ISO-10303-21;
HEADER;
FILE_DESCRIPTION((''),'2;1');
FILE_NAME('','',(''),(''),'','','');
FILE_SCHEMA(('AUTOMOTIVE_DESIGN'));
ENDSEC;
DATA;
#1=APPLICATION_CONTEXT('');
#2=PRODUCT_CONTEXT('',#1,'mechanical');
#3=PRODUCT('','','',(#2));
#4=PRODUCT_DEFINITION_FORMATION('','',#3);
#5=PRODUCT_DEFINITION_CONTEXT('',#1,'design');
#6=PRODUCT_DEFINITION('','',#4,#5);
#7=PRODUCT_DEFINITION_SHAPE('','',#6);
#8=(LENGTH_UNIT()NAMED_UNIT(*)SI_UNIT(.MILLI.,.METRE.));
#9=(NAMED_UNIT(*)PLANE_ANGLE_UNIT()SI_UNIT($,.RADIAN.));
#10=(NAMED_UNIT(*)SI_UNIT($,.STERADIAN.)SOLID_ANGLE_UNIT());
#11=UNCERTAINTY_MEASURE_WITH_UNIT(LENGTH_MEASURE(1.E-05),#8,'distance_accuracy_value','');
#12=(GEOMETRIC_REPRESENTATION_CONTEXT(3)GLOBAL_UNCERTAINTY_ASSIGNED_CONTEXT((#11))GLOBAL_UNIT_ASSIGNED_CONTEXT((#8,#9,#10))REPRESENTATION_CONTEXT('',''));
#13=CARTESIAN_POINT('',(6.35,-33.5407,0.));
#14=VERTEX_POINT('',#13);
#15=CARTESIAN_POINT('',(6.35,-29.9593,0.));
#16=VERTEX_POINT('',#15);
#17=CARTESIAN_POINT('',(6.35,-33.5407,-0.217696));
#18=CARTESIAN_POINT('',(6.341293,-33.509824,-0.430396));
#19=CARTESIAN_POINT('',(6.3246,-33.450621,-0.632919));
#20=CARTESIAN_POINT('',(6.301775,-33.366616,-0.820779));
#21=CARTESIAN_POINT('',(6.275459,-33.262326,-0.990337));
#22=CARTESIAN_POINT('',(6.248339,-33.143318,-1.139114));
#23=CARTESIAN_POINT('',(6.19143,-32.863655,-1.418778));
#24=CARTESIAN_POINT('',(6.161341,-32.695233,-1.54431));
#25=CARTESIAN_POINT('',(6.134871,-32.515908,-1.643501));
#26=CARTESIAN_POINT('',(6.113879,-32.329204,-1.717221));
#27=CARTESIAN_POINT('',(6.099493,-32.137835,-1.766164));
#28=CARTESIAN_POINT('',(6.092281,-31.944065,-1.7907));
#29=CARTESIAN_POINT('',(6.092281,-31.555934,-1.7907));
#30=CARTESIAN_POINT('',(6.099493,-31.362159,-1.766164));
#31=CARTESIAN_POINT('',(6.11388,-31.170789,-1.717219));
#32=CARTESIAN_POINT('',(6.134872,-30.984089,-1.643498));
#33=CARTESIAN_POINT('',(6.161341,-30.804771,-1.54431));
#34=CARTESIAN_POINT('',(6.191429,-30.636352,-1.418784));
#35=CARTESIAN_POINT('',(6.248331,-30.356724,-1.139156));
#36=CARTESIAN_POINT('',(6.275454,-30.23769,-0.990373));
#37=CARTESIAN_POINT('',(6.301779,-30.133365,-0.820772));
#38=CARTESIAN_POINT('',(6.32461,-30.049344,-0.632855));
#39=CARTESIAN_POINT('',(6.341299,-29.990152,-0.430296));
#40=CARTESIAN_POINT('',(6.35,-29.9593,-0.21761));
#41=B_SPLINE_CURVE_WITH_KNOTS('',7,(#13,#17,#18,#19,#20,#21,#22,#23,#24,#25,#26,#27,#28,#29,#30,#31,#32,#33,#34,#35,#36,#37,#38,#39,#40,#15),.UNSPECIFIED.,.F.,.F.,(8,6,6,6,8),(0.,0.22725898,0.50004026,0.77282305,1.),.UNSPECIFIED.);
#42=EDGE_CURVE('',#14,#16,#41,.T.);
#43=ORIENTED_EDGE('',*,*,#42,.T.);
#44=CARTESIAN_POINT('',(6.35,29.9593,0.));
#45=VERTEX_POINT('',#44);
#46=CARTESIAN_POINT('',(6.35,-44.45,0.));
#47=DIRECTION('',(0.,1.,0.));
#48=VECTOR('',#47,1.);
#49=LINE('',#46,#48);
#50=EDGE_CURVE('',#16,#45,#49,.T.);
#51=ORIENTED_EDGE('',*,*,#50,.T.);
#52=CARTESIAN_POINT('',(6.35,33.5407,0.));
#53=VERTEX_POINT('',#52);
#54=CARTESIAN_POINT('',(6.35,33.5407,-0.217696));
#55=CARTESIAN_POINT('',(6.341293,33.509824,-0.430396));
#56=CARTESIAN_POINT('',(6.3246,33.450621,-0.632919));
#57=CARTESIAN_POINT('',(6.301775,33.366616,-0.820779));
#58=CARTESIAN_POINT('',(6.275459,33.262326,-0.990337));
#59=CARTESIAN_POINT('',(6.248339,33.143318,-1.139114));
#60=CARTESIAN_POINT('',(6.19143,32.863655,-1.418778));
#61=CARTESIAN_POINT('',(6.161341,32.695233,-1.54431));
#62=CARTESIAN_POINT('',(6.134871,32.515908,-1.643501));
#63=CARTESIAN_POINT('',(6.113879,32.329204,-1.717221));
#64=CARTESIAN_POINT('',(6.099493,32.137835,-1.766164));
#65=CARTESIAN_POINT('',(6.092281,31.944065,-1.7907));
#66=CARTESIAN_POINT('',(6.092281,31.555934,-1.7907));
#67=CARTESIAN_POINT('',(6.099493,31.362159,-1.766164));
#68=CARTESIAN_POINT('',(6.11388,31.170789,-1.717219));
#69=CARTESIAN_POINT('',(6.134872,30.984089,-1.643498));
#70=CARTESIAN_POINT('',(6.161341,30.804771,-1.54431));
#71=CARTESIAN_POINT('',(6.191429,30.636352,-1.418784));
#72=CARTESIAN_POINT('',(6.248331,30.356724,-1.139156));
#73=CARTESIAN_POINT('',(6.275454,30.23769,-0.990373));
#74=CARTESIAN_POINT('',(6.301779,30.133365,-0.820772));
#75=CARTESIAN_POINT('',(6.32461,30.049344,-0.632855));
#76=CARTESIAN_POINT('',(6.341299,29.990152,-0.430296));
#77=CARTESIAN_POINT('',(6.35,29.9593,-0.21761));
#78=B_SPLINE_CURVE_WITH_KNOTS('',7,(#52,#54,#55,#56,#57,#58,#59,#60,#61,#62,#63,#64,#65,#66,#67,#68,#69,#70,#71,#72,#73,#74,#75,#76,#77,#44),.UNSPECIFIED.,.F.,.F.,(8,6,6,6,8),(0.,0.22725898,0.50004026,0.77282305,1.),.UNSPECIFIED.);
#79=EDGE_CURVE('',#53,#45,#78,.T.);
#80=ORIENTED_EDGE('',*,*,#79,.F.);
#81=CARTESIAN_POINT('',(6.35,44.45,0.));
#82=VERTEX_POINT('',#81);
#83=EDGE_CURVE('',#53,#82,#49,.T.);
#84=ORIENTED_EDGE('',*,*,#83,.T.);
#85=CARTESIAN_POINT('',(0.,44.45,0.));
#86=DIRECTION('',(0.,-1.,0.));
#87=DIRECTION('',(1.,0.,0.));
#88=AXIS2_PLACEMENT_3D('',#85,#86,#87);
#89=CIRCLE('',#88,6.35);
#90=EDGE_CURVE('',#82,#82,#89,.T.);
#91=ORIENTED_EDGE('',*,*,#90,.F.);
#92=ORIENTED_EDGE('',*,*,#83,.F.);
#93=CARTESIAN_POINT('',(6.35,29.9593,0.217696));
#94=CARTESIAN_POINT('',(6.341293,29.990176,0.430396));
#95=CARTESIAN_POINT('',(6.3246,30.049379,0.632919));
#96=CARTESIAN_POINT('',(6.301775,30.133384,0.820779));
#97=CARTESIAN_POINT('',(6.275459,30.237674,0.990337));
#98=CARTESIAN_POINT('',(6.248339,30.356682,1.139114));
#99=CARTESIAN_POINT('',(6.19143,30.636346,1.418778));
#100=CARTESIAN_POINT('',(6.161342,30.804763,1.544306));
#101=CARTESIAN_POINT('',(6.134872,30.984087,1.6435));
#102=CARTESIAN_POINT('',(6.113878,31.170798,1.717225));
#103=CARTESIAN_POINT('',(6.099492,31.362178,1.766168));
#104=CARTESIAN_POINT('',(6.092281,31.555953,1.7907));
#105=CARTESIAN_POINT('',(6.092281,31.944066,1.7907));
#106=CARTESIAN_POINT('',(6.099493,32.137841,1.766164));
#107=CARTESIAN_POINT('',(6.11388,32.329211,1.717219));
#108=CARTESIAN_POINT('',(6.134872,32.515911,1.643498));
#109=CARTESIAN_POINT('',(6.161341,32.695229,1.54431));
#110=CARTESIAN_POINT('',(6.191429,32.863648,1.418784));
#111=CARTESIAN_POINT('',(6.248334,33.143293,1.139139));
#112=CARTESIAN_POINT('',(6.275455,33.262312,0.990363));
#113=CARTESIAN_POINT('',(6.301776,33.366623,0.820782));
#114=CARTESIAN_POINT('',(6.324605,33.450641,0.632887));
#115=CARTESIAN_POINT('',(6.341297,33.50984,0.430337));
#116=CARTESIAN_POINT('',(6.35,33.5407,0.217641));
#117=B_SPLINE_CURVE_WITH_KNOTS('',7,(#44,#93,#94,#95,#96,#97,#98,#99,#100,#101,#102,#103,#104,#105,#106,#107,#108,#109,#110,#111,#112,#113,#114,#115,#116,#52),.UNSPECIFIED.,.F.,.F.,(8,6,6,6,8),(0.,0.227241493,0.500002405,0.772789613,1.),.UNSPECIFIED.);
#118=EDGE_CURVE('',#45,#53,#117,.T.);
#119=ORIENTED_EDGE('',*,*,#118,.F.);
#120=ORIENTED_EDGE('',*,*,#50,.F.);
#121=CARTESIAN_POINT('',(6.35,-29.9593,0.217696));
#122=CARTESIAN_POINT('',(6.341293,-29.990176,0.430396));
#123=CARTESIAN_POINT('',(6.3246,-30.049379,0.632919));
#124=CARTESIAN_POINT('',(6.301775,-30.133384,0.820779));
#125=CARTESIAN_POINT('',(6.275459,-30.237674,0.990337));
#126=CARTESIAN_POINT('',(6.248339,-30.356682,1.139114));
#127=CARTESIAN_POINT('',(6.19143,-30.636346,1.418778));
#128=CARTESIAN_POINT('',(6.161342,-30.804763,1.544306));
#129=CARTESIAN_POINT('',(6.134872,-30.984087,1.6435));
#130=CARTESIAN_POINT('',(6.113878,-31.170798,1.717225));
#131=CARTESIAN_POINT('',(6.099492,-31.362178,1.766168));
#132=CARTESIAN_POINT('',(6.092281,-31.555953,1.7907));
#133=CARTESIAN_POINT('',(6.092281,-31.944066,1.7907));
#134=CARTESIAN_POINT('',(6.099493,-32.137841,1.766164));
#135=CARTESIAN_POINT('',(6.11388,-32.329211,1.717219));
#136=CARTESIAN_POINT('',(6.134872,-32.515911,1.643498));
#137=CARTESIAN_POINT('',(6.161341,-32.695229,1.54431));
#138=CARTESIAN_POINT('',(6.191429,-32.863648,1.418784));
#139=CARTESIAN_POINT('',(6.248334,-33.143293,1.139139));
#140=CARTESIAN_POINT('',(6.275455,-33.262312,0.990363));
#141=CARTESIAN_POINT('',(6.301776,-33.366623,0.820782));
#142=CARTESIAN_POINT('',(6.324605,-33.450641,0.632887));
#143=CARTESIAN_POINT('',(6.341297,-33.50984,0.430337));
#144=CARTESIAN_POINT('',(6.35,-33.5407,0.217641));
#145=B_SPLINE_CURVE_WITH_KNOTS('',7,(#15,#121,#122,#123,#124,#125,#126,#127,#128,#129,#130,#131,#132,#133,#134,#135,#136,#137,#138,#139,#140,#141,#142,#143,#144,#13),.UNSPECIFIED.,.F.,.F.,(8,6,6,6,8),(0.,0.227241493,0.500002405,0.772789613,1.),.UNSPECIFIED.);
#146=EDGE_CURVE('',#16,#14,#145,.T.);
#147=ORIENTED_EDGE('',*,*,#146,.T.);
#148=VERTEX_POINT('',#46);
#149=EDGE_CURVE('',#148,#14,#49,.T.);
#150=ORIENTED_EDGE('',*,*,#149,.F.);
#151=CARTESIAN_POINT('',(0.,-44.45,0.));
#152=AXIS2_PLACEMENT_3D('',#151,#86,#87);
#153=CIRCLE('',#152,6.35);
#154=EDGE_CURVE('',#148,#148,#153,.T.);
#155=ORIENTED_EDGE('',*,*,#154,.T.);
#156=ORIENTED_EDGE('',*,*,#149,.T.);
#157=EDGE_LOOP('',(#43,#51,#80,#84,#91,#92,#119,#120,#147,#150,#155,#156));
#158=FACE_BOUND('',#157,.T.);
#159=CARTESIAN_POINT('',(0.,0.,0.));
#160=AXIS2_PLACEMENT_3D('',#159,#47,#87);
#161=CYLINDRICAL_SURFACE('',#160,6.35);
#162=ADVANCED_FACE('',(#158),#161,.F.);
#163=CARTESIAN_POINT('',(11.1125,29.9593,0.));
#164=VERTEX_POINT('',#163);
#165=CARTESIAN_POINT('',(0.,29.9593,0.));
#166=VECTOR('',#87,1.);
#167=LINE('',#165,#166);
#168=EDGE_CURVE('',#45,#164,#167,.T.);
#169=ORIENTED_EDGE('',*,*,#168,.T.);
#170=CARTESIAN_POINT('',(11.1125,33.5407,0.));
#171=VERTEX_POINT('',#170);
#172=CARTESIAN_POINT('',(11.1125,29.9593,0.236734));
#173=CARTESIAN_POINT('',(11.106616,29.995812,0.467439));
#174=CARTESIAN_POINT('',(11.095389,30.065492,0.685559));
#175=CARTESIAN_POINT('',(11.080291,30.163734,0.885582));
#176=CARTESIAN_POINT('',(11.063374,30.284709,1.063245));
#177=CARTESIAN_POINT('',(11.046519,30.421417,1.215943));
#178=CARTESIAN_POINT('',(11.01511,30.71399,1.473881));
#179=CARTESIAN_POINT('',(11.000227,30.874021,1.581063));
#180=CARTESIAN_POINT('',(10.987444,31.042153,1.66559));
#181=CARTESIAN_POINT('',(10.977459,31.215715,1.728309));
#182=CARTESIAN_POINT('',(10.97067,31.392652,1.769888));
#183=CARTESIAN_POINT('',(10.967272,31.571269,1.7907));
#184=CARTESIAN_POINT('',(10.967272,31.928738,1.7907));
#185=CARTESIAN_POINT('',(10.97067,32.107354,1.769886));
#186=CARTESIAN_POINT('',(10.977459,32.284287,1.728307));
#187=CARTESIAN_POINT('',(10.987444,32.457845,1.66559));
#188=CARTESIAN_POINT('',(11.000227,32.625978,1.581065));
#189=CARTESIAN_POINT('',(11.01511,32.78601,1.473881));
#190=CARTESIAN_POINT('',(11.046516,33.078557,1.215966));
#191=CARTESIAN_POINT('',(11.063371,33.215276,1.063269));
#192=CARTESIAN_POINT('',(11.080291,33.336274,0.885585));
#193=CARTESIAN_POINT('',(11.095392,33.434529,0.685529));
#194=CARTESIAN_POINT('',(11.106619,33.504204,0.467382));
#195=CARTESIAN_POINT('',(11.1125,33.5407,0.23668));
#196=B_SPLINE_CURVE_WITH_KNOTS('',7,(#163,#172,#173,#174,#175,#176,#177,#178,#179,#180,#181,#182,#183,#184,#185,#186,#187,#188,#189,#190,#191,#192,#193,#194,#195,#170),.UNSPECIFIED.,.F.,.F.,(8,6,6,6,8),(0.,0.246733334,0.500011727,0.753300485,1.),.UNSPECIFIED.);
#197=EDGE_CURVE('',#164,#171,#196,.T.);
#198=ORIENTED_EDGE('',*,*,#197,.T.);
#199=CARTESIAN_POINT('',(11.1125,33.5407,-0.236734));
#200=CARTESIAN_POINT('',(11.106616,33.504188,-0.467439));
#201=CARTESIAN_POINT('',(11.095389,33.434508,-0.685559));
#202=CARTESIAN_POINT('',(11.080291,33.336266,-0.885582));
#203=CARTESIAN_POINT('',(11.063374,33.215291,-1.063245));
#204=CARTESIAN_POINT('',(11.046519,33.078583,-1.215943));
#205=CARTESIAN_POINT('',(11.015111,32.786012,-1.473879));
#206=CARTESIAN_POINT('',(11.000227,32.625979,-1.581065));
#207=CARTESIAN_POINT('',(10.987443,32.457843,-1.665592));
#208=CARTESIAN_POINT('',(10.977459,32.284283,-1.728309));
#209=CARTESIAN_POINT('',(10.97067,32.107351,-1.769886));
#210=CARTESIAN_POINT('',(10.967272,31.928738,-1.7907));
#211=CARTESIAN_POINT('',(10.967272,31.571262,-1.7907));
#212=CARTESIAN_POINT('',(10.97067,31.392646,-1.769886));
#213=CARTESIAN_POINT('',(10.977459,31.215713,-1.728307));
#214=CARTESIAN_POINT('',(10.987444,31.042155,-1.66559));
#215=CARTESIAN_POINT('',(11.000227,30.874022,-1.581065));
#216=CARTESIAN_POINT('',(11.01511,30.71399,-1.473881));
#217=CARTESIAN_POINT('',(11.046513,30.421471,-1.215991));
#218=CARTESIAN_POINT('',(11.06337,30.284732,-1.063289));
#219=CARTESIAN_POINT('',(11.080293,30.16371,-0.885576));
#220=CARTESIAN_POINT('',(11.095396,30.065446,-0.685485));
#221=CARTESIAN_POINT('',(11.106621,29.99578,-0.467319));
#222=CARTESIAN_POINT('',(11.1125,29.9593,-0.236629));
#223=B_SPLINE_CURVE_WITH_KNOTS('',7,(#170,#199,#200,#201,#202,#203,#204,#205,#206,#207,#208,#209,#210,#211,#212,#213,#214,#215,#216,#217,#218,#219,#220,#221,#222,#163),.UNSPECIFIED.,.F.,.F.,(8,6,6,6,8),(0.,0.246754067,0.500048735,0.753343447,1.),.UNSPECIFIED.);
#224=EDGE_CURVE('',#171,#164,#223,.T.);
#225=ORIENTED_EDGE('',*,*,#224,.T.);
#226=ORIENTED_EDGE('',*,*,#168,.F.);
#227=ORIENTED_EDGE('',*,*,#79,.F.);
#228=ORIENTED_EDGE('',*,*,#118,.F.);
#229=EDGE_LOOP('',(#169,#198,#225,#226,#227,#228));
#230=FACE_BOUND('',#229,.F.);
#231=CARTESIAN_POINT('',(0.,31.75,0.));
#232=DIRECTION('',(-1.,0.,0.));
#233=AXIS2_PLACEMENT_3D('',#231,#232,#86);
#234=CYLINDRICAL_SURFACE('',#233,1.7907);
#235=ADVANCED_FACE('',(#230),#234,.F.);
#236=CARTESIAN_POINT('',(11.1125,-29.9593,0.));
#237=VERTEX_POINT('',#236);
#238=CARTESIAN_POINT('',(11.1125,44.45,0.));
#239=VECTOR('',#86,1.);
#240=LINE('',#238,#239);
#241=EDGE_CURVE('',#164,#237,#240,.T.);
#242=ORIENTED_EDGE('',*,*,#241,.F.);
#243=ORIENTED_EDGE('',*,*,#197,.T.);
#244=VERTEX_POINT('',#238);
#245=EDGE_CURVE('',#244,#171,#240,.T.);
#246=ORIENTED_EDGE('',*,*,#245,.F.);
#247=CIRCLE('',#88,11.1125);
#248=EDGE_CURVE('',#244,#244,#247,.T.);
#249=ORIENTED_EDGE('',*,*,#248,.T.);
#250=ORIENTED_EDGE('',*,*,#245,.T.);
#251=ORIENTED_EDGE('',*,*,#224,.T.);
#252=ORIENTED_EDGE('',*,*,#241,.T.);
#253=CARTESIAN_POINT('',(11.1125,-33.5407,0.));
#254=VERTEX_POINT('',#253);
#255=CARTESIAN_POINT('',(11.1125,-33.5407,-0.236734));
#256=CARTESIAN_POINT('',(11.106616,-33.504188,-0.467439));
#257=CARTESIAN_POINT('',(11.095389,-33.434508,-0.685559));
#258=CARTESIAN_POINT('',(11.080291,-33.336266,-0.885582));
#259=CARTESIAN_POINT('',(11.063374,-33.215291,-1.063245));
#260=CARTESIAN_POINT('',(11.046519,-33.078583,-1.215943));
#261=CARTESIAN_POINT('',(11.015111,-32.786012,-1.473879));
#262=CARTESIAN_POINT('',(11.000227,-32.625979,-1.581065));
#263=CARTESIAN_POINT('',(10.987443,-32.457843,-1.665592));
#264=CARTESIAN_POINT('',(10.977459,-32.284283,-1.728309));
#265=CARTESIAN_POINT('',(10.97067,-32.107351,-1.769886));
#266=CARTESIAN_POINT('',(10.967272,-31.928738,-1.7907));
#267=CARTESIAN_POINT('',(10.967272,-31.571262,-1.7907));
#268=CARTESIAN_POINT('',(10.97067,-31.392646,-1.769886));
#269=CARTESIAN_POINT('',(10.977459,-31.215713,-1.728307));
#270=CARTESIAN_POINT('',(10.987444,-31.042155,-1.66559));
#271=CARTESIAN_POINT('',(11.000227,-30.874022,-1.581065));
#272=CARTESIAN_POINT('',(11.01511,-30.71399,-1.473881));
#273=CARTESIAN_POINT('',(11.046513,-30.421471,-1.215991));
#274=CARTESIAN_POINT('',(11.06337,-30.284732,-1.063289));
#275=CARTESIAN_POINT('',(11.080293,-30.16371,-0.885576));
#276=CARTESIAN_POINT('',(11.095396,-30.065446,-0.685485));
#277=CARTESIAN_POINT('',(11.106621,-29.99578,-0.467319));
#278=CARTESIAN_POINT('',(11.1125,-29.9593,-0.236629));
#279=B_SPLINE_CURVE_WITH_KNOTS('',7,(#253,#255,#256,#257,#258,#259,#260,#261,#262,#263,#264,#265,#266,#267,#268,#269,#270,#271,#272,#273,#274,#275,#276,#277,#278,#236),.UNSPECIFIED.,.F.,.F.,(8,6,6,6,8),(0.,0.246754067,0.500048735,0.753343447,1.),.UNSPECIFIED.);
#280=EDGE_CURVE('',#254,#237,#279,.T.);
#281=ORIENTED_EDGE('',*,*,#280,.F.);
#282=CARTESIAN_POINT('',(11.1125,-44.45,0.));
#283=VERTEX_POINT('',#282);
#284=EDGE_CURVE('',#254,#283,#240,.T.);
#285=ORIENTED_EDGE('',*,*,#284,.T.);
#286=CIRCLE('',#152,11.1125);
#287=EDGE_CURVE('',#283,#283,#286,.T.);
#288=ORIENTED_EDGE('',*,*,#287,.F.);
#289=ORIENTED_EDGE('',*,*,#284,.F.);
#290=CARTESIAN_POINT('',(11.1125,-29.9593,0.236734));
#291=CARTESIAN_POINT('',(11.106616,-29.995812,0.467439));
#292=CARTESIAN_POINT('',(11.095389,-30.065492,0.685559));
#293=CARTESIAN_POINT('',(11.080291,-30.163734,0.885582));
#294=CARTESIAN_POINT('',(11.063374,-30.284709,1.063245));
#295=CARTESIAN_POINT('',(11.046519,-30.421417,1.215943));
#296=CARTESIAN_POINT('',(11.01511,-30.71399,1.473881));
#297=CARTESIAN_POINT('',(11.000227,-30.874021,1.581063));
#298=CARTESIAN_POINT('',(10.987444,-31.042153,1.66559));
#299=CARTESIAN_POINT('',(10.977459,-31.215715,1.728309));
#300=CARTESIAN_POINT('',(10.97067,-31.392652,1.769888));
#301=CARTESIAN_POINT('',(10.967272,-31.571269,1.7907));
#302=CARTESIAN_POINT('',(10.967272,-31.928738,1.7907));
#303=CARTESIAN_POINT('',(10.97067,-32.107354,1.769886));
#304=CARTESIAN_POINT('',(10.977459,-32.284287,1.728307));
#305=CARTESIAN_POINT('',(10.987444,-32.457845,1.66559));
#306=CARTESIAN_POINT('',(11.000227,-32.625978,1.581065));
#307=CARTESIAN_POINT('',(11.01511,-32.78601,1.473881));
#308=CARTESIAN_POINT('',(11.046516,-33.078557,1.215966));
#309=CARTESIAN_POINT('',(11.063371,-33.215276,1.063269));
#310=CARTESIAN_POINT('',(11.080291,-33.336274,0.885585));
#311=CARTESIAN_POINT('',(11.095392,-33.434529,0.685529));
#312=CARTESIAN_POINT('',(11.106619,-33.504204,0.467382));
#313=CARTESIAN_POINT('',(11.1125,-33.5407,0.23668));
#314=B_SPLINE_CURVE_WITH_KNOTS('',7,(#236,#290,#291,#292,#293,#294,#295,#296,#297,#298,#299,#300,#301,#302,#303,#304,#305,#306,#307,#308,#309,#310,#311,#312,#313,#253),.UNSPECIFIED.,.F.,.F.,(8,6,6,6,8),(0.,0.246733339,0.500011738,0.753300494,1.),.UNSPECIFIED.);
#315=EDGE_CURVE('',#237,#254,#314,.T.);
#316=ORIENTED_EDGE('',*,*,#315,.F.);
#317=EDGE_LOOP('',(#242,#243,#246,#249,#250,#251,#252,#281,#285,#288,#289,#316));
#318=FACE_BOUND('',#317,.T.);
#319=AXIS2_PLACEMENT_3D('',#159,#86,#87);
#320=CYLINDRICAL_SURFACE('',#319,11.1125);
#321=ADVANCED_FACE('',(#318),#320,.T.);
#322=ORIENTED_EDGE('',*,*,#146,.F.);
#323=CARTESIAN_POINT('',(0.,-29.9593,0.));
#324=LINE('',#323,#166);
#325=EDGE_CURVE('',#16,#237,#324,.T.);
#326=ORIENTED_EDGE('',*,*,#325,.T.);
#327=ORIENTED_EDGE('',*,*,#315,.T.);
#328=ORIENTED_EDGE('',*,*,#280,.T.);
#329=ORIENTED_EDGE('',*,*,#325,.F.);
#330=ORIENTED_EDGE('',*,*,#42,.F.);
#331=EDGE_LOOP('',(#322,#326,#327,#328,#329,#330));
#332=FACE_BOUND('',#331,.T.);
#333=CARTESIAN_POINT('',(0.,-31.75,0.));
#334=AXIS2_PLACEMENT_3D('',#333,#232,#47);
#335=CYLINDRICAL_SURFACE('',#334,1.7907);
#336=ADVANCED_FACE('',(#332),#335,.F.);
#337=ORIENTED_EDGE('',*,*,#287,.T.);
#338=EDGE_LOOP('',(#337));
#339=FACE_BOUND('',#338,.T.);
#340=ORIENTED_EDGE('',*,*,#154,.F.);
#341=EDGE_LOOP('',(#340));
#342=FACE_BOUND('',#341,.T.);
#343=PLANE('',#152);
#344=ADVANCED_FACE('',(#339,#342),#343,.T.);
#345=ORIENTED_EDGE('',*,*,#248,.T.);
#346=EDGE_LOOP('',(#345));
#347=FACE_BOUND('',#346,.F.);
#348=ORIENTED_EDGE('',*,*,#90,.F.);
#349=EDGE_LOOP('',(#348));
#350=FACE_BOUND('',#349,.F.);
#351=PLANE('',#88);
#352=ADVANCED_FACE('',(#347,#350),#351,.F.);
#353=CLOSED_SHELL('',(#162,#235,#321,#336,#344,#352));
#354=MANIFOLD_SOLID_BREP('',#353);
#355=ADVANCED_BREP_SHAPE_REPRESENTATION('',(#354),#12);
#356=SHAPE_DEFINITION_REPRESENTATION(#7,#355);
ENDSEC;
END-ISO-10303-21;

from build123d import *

# Parameters (mm, degrees)
F0_R     = 11.1125
F0_R_2   = 6.35
F1_DEPTH = 44.45
F2_R     = 1.7907
F3_DEPTH = 12.7


# Not quite as in the source:
# - a pattern or mirror of a feature is missing from the dataset's text; its kind, count and spacing are read off the source's solid


with BuildPart() as f1:
    # F0 (on Front) → F1 (new body, symmetric)
    with BuildSketch(Plane.XZ):
        Circle(F0_R)
        Circle(F0_R_2, mode=Mode.SUBTRACT)
    extrude(amount=F1_DEPTH, both=True)

    # F2 (on Right) → F3 (cut)
    with BuildSketch(Plane.YZ):
        with Locations((-31.75, 0)):
            Circle(F2_R)
    f3 = extrude(amount=F3_DEPTH, mode=Mode.SUBTRACT)

    # F3_copies: F3 across plane
    add(f3.mirror(Plane.ZX), mode=Mode.SUBTRACT)


solid = f1.part
